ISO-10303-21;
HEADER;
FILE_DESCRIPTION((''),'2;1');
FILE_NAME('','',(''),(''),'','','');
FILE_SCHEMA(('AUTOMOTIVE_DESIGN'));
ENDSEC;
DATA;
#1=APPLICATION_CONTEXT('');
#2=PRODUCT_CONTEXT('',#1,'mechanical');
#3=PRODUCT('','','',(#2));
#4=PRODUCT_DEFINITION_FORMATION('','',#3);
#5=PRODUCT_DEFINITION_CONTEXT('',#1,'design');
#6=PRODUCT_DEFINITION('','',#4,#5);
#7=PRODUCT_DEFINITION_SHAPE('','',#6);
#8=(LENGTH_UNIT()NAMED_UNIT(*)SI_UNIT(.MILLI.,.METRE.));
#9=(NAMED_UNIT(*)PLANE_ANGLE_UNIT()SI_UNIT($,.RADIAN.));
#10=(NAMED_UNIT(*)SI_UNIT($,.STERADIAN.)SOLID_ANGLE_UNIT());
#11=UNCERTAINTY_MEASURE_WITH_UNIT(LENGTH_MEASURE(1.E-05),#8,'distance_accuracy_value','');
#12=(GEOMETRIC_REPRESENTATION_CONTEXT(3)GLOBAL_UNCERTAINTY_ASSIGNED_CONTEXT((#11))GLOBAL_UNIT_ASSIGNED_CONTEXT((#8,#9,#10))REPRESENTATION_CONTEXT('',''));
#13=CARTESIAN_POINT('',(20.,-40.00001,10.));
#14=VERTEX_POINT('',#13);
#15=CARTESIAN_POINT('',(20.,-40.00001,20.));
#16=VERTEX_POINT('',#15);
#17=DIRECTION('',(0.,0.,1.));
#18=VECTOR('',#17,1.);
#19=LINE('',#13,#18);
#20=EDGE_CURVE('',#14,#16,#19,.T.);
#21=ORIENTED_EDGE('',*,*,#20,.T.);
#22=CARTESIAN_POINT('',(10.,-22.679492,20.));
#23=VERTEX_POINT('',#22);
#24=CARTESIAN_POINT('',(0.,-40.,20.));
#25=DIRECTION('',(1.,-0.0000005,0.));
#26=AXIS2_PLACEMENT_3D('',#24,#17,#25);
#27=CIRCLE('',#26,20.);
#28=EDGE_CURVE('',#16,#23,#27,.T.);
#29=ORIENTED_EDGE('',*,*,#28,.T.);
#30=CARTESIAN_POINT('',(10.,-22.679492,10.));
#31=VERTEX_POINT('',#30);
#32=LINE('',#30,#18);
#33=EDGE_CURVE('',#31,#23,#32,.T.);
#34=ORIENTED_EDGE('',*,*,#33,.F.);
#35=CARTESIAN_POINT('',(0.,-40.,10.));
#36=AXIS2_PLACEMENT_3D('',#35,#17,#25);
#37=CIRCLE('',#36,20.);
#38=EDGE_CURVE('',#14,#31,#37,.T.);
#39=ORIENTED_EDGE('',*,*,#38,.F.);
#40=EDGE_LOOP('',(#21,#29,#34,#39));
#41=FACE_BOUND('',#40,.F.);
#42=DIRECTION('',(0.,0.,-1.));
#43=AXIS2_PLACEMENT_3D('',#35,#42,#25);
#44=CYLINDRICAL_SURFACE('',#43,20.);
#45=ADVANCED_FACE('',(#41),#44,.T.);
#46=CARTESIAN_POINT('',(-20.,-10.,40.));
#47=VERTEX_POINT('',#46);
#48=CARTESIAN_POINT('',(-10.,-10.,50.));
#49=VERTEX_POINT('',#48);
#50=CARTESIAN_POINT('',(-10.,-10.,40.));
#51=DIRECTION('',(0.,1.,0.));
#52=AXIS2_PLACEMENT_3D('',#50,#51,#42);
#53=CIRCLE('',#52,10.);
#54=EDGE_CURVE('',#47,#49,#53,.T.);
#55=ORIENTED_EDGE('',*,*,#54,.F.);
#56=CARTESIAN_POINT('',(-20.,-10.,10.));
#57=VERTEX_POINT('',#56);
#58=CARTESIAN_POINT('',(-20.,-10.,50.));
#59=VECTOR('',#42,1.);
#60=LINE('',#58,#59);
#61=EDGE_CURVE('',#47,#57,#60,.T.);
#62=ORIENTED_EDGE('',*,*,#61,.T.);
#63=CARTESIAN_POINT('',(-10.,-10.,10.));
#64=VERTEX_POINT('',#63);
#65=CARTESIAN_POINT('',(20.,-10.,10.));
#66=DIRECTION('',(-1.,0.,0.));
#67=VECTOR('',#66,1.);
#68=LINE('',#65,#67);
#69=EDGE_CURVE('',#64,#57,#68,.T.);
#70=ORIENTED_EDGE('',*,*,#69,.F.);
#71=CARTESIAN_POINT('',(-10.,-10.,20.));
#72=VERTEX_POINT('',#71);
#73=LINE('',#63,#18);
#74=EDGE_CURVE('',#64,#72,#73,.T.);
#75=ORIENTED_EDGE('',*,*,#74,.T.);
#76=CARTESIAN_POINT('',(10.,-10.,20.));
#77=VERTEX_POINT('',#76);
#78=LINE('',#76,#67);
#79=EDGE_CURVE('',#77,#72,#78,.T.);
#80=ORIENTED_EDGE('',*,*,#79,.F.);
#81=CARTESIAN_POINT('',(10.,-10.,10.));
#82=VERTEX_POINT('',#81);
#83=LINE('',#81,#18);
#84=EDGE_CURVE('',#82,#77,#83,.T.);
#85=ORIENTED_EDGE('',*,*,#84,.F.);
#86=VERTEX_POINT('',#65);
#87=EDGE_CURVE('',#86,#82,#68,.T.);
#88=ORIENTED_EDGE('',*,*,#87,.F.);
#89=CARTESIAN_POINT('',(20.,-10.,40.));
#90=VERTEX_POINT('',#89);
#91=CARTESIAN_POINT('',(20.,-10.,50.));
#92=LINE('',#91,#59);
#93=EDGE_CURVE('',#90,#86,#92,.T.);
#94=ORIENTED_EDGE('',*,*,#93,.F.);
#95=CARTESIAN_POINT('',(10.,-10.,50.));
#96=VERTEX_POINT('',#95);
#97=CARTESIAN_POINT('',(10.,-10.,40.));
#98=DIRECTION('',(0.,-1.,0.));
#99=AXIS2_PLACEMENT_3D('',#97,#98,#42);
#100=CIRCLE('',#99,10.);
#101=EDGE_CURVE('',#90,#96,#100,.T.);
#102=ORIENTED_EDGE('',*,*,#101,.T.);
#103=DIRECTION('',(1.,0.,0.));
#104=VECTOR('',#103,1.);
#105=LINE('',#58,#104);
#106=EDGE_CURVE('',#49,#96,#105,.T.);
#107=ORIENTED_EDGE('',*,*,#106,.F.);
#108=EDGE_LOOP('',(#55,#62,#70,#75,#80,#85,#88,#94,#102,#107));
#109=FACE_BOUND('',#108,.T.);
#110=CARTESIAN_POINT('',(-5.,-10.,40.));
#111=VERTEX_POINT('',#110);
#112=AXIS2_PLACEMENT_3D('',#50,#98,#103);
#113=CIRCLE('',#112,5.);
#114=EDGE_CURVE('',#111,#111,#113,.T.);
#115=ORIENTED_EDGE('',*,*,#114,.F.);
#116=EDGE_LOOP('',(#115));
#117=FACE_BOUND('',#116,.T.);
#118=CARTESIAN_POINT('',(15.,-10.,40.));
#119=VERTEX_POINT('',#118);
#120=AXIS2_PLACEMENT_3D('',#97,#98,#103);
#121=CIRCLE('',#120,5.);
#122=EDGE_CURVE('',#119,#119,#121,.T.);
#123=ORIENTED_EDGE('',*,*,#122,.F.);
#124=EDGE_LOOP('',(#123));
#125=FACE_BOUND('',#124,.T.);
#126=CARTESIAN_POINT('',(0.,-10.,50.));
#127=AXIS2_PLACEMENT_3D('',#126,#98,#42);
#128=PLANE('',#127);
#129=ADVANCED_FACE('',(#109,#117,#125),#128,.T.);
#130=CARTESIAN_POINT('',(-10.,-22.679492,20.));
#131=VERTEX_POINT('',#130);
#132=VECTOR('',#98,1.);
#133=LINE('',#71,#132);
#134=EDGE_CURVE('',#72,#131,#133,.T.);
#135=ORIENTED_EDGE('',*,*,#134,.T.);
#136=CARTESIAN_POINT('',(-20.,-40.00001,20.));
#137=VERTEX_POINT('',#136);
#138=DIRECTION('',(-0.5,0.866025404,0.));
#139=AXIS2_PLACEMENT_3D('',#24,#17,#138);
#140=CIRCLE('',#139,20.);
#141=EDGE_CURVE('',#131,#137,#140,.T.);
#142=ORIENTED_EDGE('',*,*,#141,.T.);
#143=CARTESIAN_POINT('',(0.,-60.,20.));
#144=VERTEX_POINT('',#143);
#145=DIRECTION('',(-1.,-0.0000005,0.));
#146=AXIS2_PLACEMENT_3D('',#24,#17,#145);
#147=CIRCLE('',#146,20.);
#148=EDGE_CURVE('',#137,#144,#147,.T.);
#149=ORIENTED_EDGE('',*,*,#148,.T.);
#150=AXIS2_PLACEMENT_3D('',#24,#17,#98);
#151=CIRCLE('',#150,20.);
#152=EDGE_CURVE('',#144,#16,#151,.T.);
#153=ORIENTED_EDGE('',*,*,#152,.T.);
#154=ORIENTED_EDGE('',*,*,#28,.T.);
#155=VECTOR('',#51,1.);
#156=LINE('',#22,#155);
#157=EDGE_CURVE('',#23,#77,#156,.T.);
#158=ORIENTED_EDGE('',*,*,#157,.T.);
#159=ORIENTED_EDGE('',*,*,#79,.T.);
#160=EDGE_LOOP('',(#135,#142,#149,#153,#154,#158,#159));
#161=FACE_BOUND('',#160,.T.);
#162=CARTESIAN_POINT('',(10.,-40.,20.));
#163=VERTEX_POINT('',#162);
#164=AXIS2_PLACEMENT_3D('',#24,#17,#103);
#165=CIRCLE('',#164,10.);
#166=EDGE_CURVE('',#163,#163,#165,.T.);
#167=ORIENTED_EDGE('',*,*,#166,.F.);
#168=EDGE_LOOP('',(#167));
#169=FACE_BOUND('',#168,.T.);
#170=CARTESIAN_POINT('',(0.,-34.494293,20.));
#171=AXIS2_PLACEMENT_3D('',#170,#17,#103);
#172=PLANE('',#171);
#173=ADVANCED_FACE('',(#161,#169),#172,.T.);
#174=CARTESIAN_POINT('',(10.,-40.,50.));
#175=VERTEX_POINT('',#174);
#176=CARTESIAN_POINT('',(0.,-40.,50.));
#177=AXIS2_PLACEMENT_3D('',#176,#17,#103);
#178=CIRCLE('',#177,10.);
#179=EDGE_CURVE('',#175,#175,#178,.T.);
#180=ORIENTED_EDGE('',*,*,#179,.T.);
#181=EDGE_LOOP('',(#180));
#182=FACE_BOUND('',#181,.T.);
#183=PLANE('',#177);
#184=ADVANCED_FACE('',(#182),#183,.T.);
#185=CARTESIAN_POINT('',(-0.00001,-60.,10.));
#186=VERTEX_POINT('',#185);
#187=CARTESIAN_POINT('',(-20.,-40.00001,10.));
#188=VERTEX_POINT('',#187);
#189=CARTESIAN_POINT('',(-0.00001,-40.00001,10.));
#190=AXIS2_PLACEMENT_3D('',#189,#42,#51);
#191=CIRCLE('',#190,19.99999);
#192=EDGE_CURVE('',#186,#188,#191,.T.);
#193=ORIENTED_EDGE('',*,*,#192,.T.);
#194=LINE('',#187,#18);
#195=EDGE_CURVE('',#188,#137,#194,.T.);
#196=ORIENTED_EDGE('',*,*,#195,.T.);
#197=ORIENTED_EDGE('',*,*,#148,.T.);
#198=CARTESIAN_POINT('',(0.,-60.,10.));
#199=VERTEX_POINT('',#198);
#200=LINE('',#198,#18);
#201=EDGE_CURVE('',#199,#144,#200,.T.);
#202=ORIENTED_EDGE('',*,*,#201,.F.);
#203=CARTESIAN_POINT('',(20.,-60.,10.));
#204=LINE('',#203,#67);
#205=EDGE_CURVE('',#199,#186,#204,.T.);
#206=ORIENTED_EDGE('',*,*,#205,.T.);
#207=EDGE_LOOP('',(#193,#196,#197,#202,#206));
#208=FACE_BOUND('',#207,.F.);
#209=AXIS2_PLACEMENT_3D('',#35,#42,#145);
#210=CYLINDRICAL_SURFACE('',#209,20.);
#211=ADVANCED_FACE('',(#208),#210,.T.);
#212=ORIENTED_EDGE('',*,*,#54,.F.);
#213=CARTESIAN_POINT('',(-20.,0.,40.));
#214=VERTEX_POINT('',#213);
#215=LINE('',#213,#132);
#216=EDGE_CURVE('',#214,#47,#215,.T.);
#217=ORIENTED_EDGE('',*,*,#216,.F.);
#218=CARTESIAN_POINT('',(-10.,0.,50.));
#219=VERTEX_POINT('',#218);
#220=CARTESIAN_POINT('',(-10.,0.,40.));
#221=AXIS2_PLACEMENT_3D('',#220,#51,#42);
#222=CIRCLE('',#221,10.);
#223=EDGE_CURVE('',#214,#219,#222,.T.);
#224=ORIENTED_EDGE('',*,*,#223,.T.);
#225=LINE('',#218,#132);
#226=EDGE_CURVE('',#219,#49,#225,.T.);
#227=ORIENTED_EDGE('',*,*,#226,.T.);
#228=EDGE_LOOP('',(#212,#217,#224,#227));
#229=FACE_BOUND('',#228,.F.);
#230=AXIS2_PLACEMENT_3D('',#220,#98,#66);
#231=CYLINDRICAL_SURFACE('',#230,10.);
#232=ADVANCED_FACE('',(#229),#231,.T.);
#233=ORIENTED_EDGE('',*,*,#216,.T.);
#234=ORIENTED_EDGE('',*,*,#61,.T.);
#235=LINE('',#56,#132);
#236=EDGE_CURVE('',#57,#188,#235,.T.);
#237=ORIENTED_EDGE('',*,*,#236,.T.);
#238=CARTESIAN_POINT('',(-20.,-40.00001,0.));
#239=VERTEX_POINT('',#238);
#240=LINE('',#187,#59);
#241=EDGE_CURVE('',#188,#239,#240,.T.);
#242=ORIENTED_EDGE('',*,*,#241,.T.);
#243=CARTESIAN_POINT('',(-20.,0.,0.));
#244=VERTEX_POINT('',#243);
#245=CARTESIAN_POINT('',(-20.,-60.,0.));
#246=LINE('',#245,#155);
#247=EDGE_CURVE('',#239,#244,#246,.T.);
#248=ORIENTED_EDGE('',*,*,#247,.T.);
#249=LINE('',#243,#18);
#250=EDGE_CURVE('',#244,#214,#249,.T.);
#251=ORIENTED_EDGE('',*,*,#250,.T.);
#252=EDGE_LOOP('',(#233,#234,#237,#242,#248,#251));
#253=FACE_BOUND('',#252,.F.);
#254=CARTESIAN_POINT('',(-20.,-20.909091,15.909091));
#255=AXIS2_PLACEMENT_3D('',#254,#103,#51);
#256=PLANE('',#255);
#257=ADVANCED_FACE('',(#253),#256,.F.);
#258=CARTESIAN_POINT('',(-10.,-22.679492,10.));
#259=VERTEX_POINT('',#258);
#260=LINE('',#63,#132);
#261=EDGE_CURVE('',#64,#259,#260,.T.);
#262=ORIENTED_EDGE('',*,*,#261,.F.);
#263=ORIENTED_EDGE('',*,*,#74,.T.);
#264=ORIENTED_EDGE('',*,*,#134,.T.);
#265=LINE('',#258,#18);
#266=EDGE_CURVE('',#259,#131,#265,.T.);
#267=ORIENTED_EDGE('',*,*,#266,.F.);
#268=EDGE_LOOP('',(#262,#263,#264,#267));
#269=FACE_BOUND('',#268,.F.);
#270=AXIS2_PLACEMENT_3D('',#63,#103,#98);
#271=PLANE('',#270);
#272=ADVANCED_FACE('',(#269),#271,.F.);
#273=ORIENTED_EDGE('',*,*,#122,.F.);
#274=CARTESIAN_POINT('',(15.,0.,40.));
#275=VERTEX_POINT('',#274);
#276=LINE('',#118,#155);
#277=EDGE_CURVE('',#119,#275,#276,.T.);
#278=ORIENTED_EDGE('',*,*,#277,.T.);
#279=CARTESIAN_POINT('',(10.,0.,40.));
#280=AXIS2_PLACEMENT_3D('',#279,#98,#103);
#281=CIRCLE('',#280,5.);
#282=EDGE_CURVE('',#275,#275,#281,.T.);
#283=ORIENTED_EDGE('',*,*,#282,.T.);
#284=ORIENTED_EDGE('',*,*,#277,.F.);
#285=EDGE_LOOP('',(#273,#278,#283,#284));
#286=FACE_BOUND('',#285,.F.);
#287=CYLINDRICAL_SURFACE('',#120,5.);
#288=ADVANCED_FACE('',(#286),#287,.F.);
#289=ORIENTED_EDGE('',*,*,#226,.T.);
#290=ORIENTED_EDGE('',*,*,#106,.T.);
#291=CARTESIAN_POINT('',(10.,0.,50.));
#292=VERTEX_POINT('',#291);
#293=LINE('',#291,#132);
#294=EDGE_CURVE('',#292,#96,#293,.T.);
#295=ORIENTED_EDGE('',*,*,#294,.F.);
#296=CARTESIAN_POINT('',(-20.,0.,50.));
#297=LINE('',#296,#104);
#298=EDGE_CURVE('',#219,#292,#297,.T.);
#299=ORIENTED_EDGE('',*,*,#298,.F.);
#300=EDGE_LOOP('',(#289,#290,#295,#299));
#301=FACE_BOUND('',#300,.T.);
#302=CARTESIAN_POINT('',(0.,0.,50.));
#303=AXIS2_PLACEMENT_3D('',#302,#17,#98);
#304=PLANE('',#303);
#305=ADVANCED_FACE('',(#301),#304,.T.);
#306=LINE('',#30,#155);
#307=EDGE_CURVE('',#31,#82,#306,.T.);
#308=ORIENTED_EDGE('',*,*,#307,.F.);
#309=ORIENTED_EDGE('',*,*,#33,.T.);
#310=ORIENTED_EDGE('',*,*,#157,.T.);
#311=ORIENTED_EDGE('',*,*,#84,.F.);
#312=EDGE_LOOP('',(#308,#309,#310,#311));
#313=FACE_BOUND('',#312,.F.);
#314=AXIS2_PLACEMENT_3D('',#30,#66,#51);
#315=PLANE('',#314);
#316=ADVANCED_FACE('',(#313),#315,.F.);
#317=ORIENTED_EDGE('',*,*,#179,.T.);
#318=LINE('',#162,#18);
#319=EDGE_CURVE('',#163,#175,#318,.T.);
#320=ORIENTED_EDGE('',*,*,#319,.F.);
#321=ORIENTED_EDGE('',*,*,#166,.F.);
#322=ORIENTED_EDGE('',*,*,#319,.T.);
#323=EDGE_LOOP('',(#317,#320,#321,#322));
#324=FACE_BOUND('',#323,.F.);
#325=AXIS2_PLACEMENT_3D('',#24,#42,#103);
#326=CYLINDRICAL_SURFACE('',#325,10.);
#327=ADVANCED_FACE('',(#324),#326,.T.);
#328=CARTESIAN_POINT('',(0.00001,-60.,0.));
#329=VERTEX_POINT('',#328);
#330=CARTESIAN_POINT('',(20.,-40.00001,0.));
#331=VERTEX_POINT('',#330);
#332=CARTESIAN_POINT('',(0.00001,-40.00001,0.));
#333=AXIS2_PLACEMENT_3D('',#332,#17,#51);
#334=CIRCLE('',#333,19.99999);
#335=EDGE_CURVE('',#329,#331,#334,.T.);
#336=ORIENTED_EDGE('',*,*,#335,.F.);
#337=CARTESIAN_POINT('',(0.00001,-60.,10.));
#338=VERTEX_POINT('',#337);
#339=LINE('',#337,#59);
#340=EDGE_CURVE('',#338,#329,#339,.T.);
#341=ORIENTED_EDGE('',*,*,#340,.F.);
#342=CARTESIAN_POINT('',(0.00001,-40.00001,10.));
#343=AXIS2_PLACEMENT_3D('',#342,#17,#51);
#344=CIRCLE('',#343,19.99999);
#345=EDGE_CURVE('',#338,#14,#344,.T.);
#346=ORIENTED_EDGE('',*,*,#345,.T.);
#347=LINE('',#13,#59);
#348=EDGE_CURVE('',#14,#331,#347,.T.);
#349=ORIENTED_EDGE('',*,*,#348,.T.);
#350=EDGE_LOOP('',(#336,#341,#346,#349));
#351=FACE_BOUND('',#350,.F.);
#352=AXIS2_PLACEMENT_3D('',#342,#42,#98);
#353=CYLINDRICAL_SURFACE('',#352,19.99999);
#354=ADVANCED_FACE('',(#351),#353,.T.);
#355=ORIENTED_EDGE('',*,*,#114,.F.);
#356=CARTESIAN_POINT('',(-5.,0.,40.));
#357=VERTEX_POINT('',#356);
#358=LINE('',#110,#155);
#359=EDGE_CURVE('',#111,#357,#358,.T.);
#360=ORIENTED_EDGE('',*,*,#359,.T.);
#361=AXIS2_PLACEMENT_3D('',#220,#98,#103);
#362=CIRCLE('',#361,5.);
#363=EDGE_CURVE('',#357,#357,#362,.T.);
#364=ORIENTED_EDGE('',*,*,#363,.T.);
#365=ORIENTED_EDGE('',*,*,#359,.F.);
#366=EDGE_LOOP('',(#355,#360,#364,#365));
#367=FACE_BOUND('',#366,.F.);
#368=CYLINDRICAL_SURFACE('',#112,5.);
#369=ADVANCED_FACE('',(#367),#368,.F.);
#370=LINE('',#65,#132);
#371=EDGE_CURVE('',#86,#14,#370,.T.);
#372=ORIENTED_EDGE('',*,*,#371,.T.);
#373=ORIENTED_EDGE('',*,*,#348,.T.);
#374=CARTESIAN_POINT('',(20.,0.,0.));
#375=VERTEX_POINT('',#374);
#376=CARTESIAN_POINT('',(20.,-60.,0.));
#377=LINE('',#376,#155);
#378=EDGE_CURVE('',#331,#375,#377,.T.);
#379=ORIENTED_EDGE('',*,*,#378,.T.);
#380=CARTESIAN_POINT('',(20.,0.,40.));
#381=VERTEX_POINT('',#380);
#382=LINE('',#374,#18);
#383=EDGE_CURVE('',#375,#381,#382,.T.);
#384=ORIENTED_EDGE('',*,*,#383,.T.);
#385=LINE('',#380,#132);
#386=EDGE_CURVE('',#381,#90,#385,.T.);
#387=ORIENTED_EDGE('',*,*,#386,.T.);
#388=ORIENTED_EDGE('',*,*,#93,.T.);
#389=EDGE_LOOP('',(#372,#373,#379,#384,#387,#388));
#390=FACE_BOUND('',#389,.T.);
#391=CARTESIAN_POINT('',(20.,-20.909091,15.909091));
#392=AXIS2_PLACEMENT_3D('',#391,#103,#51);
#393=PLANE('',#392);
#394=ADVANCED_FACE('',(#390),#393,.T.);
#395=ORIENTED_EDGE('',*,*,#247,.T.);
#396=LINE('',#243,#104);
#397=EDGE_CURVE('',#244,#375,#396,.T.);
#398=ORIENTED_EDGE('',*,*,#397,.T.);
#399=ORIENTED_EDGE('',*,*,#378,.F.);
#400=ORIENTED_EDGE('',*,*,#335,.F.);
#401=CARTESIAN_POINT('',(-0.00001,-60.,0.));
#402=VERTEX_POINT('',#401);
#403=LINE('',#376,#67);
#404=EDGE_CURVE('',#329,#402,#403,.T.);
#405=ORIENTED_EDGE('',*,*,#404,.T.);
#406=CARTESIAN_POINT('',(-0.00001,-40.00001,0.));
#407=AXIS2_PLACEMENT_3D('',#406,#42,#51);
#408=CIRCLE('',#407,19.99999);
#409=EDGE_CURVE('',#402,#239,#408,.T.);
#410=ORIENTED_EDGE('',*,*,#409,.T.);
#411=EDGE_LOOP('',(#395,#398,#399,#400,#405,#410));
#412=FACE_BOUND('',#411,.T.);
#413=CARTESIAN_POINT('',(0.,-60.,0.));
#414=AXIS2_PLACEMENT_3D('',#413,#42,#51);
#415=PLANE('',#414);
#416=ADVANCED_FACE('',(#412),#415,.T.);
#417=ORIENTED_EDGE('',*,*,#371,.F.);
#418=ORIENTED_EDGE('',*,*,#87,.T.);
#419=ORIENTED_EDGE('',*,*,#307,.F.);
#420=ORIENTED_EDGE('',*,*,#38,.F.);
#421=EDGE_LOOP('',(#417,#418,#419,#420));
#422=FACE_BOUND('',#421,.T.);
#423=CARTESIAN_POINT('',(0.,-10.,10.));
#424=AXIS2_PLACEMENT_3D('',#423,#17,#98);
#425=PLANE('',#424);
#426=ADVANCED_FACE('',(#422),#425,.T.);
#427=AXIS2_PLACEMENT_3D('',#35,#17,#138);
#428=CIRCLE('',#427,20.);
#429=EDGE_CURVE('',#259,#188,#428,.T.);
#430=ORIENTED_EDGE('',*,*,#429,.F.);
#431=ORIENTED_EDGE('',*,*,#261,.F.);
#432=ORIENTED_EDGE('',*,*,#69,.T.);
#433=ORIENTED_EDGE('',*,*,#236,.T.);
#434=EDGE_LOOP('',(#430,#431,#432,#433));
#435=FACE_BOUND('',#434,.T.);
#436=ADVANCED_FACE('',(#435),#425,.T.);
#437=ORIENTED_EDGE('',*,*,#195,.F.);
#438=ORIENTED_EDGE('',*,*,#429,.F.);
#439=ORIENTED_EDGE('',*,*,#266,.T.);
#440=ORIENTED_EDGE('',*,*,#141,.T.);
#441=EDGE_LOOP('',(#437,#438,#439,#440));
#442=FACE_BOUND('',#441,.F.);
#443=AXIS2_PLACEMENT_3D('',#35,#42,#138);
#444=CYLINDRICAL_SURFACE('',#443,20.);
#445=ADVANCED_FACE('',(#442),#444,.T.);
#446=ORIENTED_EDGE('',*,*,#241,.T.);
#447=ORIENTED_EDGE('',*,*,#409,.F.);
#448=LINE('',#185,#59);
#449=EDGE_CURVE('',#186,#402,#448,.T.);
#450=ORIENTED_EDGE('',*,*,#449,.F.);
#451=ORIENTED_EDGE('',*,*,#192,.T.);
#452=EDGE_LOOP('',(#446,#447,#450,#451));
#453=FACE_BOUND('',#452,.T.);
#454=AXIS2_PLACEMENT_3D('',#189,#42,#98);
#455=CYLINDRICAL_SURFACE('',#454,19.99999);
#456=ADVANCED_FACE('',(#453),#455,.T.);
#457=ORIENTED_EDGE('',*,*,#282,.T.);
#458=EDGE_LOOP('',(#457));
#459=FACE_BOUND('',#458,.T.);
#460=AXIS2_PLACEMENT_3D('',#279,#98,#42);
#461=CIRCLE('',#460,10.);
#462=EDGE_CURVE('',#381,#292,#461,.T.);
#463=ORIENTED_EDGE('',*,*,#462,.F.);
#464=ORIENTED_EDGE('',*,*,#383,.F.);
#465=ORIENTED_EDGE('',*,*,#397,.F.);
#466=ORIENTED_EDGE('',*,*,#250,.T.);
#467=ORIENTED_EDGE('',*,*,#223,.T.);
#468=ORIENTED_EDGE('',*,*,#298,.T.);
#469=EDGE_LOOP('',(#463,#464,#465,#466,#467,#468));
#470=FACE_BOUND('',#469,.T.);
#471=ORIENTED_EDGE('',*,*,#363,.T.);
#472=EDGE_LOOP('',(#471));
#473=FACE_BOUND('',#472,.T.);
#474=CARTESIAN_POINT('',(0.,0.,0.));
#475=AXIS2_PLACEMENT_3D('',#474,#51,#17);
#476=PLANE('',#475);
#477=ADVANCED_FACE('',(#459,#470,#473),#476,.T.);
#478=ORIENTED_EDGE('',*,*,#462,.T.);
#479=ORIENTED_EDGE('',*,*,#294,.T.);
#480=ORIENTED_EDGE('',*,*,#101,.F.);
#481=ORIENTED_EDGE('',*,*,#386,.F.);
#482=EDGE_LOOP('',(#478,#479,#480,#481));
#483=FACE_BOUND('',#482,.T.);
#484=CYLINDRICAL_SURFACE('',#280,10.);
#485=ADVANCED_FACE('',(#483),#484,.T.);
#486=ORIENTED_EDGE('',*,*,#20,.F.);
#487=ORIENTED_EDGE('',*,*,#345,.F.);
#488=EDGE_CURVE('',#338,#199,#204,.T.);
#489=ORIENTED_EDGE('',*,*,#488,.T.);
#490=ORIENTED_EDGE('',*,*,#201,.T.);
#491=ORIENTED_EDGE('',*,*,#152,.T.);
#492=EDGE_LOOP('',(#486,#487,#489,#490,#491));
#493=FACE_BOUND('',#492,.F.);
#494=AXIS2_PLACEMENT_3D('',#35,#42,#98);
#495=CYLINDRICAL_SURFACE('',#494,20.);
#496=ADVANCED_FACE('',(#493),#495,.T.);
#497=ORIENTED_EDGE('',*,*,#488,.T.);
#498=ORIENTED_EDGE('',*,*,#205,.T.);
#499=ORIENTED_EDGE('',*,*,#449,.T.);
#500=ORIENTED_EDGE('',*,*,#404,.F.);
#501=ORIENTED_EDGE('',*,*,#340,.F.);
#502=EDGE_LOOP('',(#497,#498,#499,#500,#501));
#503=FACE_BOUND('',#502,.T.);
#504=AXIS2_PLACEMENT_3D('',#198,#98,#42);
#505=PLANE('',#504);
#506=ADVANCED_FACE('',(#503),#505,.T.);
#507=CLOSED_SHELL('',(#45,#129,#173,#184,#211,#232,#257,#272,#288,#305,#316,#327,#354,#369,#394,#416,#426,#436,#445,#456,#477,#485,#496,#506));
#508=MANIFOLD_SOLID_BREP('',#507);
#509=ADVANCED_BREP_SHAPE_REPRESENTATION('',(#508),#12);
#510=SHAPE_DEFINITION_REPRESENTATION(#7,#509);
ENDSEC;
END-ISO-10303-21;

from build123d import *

# Parameters (mm, degrees)
F1_DEPTH = 20
F2_R     = 19.99999
F3_R     = 10
F5_DEPTH = 10
F6_R     = 10
F7_DEPTH = 30
F9_D     = 10
F9_DEPTH = 10.001


# Not quite as in the source:
# - a fillet or chamfer is up to 0.001 mm smaller than in the source, because OpenCascade refuses the exact size


with BuildPart() as f1:
    # F0 (on Right) → F1 (new body, symmetric)
    with BuildSketch(Plane.YZ):
        Polygon((-60, 0), (0, 0), (0, 50), (-10, 50), (-10, 10), (-60, 10), align=None)
    extrude(amount=F1_DEPTH, both=True)

    # F2 (radius 20 in the source; OpenCascade refuses exactly that, so slightly less here)
    f2_edges = [f1.edges().sort_by_distance(p)[0] for p in [
        (-20, -60, 5),
        (20, -60, 5),
    ]]
    fillet(f2_edges, radius=F2_R)

    # F3
    f3_edges = [f1.edges().sort_by_distance(p)[0] for p in [
        (-20, -5, 50),
        (20, -5, 50),
    ]]
    fillet(f3_edges, radius=F3_R)

    # F4 (on face) → F5 (join)
    with BuildSketch(Plane.XY.offset(10)):
        with BuildLine():
            Line((-10, -10), (-10, -22.6794919243))
            ThreePointArc((-10, -22.6794919243), (-17.3205105757, -30.0000043301), (-20, -40.00001))
            ThreePointArc((-20, -40.00001), (-14.1421320882, -54.1421391593), (0, -60))
            ThreePointArc((0, -60), (14.1421320882, -54.1421391593), (20, -40.00001))
            ThreePointArc((20, -40.00001), (17.3205105757, -30.0000043301), (10, -22.6794919243))
            Line((10, -22.6794919243), (10, -10))
            Line((10, -10), (-10, -10))
        make_face()
    extrude(amount=F5_DEPTH)

    # F6 (on face) → F7 (join)
    with BuildSketch(Plane.XY.offset(20)):
        with Locations((0, -40)):
            Circle(F6_R)
    extrude(amount=F7_DEPTH)

    # F9 (through all, one way)
    with BuildSketch(Plane.XZ.offset(10)):
        with Locations((10, 40), (-10, 40)):
            Circle(F9_D / 2)
    extrude(amount=-F9_DEPTH, mode=Mode.SUBTRACT)


solid = f1.part
